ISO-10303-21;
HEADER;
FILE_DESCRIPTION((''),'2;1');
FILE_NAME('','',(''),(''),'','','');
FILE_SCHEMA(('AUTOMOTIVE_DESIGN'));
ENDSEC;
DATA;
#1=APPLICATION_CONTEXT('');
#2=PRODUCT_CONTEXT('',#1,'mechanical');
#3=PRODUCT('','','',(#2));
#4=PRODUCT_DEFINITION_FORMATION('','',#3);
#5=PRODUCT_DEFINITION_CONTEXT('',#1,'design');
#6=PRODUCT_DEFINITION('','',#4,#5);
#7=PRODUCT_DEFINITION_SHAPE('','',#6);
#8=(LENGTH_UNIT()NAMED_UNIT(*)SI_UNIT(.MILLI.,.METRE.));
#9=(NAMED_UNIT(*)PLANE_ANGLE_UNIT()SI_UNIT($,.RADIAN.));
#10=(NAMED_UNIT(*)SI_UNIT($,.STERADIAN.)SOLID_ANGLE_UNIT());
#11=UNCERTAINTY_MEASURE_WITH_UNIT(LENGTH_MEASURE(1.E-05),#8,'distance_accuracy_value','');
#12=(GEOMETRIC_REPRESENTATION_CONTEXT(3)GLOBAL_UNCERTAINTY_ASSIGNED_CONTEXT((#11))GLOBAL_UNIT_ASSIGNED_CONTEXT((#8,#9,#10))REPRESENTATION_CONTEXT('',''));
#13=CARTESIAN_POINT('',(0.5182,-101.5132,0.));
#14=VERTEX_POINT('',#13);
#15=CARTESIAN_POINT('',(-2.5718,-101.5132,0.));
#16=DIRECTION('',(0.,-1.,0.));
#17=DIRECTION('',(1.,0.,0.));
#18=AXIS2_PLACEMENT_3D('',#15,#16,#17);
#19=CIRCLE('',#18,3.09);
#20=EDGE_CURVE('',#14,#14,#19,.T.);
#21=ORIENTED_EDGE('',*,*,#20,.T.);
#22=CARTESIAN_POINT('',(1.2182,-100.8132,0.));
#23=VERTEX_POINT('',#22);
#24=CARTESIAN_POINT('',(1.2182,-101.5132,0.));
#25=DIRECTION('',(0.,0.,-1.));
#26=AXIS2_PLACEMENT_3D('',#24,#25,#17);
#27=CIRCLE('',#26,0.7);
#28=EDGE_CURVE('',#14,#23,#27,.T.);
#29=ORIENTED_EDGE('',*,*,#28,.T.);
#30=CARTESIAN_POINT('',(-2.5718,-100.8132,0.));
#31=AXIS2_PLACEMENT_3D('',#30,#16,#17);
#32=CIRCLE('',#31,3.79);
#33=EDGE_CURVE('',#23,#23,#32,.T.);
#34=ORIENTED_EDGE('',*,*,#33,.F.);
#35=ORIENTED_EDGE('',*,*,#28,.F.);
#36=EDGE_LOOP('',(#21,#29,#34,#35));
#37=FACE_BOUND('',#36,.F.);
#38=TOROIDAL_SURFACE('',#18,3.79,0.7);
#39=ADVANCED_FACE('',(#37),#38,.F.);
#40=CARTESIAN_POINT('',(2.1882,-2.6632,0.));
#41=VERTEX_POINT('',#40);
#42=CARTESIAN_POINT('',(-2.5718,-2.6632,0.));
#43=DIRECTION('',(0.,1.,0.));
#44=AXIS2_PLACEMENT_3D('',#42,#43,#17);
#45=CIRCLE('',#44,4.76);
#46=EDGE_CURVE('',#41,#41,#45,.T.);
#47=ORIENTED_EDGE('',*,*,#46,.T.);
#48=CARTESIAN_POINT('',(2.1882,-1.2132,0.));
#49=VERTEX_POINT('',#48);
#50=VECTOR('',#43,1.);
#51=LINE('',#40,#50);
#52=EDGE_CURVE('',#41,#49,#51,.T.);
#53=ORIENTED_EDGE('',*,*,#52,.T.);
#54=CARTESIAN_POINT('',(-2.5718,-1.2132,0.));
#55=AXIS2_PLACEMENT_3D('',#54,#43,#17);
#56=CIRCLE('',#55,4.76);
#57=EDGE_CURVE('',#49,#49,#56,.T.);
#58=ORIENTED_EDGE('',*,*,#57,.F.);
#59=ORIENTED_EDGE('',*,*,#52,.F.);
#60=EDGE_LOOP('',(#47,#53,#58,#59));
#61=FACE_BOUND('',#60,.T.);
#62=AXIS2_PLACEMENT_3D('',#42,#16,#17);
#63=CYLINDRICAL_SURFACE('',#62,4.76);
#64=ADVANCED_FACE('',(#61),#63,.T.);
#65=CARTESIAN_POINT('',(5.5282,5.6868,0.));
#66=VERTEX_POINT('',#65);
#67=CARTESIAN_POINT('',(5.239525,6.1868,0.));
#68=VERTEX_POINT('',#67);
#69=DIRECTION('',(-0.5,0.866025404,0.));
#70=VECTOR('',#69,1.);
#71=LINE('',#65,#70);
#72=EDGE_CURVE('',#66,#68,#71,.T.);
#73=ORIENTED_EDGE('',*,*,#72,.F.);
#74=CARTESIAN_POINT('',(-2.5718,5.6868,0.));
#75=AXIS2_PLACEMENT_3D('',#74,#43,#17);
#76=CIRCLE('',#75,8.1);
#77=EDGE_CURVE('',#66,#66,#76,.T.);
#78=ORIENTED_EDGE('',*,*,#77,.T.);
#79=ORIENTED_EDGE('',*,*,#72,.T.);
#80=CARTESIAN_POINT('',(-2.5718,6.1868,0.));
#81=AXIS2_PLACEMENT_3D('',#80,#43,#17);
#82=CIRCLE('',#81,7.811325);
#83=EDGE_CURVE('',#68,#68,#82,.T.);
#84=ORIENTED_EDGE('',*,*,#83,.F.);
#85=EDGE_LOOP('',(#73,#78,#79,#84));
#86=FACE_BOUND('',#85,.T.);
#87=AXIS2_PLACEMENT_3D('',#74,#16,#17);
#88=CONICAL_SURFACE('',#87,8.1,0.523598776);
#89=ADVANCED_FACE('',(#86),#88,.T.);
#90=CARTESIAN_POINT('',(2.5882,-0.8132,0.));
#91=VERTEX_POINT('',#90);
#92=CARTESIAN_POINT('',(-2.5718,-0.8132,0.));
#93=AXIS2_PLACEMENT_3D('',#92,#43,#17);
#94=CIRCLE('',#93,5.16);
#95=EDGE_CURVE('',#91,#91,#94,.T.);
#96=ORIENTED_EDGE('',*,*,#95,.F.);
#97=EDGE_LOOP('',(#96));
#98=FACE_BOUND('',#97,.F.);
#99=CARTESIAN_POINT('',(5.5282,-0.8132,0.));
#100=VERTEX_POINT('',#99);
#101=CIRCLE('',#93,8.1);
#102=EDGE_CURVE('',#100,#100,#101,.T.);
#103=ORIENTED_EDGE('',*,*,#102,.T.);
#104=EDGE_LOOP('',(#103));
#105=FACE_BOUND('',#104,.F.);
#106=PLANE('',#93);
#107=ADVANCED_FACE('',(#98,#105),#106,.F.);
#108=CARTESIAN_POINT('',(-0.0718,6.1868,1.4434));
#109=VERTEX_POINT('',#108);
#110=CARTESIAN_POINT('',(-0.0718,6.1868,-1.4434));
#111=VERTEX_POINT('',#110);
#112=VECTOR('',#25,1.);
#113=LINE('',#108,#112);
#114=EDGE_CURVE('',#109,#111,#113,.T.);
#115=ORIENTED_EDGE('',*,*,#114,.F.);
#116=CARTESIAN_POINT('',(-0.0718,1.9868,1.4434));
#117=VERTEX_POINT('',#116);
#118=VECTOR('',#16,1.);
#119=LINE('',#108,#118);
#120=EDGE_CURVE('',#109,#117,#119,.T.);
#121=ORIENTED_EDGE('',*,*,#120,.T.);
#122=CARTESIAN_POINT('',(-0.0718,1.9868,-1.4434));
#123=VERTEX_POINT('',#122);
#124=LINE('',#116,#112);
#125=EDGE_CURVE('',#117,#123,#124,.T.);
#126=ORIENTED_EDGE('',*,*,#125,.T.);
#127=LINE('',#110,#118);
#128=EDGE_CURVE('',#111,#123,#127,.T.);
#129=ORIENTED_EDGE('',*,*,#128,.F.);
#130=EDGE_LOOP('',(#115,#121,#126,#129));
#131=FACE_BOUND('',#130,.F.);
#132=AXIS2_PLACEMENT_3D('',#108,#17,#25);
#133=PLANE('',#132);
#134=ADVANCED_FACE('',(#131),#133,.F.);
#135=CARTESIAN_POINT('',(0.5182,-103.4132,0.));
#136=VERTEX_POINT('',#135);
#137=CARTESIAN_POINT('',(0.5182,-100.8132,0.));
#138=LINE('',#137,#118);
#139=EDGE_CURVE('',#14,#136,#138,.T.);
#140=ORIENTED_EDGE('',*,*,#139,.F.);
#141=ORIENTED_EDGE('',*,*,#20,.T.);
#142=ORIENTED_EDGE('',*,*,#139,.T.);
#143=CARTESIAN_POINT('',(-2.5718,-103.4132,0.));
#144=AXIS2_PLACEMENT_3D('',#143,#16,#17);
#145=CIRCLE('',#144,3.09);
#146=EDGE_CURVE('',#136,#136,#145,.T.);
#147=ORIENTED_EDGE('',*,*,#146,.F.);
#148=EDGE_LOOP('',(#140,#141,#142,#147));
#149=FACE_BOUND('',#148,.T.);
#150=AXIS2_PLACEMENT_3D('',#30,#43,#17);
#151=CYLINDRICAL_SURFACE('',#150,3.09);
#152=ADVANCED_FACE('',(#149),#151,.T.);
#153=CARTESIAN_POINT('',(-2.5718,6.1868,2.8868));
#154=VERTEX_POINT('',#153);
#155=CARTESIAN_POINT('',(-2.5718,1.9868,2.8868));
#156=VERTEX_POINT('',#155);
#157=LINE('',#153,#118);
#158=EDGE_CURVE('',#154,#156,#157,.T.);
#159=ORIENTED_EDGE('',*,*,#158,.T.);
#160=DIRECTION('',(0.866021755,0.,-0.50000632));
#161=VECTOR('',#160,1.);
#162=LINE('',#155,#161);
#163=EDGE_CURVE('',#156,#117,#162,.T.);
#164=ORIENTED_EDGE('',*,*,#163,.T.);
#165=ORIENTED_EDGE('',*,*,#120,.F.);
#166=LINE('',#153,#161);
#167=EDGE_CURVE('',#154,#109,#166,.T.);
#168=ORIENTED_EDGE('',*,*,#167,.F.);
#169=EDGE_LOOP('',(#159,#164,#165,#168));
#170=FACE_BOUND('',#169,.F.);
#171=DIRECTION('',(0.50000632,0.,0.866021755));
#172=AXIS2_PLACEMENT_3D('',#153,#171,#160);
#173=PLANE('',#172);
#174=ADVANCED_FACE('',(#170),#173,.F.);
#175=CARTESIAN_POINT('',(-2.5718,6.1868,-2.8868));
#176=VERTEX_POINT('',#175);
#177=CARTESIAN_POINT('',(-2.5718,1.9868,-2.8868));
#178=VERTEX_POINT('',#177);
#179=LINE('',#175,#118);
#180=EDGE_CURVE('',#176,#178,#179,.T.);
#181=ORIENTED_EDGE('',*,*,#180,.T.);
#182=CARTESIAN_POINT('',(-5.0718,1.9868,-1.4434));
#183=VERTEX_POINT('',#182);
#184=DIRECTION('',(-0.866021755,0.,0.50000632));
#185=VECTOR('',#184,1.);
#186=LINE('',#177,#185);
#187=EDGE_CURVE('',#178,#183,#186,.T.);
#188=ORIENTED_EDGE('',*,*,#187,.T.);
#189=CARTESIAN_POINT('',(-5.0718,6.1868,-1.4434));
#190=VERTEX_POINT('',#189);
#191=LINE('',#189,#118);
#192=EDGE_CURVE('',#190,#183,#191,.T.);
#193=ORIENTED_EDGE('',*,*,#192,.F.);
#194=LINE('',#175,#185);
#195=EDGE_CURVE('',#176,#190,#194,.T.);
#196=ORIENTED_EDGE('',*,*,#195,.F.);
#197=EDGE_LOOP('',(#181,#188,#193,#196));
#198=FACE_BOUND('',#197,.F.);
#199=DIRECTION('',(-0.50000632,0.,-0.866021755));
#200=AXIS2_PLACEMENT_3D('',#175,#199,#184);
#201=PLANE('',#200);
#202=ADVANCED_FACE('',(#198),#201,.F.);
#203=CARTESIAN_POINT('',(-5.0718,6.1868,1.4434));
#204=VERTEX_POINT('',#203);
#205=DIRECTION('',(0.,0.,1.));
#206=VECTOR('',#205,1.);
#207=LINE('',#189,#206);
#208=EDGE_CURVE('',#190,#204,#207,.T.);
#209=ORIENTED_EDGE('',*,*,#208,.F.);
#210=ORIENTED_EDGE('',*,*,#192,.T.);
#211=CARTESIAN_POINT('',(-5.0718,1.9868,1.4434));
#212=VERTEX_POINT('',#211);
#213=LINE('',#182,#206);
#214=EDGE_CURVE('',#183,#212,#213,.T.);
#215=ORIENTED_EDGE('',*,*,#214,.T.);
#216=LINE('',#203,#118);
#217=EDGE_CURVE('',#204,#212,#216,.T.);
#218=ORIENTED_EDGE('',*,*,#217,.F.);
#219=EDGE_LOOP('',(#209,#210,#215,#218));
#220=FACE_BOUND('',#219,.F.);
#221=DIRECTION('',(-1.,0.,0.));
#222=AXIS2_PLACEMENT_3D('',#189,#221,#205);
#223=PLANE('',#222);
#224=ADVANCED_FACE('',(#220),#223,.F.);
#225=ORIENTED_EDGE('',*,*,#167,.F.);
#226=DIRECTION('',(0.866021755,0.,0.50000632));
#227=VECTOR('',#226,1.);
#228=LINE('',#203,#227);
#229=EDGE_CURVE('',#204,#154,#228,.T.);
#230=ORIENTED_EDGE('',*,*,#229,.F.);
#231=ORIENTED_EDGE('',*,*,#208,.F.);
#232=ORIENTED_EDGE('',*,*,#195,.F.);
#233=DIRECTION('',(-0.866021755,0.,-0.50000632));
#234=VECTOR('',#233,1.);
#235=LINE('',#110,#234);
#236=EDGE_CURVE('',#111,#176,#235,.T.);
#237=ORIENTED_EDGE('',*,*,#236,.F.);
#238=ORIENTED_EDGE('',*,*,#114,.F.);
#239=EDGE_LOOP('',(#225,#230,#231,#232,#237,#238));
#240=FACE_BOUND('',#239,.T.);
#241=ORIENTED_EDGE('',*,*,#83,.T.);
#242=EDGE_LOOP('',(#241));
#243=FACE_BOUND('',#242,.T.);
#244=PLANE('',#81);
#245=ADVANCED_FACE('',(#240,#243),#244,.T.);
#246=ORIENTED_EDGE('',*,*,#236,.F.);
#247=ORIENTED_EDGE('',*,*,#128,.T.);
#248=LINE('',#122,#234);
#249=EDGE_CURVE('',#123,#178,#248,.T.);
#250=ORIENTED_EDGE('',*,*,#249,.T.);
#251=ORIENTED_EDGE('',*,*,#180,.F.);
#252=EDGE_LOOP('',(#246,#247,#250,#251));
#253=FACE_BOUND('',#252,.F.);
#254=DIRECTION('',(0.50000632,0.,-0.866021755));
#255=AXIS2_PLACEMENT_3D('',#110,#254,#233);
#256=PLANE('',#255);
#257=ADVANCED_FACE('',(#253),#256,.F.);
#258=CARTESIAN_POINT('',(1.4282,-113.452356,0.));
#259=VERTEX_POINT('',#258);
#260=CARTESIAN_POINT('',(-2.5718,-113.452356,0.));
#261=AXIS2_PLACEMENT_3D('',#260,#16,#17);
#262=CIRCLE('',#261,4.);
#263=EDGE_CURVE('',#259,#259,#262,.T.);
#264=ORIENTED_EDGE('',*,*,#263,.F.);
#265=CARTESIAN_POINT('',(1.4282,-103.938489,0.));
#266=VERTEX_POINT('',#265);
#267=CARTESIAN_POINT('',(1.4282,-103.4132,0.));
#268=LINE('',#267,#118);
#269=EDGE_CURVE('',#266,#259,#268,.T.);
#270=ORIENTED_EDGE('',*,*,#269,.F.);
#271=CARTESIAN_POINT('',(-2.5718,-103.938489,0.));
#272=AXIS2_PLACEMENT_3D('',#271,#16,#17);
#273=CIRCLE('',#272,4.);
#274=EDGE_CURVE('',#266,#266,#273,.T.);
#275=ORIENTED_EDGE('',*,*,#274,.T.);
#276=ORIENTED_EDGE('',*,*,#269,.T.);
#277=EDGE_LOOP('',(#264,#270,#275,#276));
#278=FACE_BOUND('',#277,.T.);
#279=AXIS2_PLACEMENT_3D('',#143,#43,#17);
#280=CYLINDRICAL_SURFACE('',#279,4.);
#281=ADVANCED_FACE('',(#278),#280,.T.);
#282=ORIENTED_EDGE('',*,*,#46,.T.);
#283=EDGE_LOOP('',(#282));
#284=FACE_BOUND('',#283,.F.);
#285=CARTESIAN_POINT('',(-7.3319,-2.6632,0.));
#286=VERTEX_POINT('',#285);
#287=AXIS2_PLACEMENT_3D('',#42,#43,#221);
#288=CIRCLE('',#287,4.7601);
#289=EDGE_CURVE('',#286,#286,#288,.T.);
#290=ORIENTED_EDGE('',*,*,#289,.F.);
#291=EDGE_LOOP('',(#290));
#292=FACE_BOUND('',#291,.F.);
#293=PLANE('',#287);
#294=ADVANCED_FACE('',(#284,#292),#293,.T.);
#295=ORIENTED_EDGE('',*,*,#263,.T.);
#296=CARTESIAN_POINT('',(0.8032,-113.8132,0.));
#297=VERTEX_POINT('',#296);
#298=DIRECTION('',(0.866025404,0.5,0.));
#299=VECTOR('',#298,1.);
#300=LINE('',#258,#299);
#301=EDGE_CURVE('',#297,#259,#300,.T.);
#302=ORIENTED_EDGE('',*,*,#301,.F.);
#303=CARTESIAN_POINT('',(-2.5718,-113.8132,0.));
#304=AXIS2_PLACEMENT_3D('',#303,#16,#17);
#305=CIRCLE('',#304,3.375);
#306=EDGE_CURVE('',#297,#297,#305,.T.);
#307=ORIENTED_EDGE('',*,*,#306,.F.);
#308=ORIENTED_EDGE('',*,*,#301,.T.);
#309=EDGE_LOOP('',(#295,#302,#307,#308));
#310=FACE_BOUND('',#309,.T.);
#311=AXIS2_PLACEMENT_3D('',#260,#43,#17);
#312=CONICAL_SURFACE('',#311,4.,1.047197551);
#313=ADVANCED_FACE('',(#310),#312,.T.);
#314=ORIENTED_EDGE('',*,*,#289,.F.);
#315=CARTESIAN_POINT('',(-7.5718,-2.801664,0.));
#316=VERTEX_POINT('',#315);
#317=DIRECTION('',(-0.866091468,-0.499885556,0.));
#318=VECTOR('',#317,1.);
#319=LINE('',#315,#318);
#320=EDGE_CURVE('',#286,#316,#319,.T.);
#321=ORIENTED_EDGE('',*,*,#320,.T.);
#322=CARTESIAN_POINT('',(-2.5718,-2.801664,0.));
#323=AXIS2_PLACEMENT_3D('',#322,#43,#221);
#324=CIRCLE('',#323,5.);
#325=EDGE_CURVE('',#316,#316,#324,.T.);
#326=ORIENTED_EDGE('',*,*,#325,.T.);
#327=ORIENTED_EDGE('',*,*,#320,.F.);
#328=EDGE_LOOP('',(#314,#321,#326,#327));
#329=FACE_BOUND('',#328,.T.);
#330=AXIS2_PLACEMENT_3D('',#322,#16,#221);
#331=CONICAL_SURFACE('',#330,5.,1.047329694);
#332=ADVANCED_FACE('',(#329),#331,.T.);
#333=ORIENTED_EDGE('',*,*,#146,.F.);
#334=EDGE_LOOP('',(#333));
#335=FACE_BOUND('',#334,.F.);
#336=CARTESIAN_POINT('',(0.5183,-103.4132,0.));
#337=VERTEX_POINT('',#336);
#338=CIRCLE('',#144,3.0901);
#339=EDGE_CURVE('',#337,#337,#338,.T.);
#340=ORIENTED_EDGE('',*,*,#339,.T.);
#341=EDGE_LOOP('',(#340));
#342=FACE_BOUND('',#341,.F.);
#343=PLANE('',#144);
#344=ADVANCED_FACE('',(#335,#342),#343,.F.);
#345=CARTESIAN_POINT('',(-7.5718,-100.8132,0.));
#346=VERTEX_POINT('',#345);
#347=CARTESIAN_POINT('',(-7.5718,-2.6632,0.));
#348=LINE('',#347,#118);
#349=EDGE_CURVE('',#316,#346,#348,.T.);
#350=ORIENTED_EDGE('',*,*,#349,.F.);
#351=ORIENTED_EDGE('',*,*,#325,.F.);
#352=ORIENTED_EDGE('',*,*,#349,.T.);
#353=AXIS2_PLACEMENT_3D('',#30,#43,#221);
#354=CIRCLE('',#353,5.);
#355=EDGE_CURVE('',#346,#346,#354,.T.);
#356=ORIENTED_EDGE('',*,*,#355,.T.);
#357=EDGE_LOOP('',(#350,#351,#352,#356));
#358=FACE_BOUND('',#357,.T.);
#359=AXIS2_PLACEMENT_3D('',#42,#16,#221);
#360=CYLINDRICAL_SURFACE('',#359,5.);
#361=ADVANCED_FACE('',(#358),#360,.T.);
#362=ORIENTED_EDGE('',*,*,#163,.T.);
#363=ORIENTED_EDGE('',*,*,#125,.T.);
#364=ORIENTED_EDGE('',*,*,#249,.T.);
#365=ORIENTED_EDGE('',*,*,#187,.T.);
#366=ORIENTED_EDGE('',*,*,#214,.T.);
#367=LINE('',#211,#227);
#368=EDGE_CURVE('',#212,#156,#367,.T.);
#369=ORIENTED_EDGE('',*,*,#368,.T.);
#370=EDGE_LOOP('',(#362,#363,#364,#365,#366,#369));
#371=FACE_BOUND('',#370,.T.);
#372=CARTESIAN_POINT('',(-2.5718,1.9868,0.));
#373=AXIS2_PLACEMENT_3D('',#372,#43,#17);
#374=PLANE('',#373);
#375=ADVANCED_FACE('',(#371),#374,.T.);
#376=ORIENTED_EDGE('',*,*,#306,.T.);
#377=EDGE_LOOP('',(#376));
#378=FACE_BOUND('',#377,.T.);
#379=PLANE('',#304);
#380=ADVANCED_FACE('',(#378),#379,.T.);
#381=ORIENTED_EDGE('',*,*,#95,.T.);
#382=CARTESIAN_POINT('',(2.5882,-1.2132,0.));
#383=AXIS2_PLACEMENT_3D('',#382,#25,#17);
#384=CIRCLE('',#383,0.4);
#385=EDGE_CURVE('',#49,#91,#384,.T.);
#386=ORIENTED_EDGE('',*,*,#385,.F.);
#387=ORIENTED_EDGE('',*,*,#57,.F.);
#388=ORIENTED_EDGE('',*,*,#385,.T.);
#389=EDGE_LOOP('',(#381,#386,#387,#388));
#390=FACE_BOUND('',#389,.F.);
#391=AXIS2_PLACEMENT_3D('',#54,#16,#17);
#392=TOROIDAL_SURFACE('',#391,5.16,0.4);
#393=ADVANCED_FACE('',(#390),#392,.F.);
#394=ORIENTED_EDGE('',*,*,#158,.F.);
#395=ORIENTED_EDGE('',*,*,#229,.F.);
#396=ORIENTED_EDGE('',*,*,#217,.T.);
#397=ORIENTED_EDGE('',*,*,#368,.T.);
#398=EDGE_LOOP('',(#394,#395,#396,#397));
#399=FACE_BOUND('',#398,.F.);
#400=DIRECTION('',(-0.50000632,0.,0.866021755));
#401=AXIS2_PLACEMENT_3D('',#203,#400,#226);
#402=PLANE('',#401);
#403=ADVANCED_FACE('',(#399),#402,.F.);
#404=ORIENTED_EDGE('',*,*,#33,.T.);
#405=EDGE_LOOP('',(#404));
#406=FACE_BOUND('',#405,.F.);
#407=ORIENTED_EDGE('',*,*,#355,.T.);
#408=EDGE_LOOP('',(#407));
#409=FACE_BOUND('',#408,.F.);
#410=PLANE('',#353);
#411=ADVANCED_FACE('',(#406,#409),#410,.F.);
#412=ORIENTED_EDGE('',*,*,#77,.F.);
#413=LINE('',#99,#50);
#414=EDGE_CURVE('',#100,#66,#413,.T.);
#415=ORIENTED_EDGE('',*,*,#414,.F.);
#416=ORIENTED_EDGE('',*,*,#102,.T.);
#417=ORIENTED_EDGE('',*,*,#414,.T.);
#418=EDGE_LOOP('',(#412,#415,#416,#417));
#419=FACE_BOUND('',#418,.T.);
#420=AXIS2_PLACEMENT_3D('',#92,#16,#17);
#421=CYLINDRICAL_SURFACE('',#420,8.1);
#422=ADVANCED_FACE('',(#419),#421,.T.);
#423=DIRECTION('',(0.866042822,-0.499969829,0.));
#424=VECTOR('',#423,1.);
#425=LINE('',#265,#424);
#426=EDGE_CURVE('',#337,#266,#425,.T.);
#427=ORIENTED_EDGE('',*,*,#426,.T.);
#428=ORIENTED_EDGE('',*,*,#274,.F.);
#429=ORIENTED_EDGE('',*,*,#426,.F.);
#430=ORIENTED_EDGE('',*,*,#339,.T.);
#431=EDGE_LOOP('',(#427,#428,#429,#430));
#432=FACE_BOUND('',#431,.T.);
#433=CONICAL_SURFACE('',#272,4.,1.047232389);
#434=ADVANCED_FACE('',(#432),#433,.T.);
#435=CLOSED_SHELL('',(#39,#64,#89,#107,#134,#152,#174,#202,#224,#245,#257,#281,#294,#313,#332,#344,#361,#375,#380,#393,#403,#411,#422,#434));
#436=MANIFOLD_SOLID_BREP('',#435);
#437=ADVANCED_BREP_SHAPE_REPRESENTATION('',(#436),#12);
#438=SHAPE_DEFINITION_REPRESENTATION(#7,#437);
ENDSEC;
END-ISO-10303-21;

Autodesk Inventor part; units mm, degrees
ref_plane "YZ Plane" through (0, 0, 0) normal (1, 0, 0) x (0, 1, 0)
ref_plane "XZ Plane" through (0, 0, 0) normal (0, 1, 0) x (-1, 0, 0)
ref_plane "XY Plane" through (0, 0, 0) normal (0, 0, 1) x (1, 0, 0)
sketch "Sketch1" plane through (0, 0, 0) normal (0, 0, 1) x (1, 0, 0)
  line L0 (-2.5718, -2.6632) -> (-7.5718, -2.6632)
  line L1 (-7.5718, -2.6632) -> (-7.5718, -100.8132)
  line L2 (-7.5718, -100.8132) -> (-2.5718, -100.8132)
  line L3 (-2.5718, -100.8132) -> (-2.5718, -2.6632)
  dimension "d1" = 98.15
  dimension "d2" = 5
revolve "Shoulder" add sketch "Sketch1" angle 360 about axis through (-2.5718, -100.8132, 0) along (0, 1, 0)
sketch "Sketch2" plane through (-2.5718, -2.6632, 0) normal (0, 1, 0) x (1, 0, 0)
  circle A0 centre (0, 0) radius 5 projected
  circle A1 centre (0, 0) radius 4.76
  dimension "d3" = 9.52
extrude "Shoulder_neck" add sketch "Sketch2" along normal blind 1.85 contours A1
sketch "Sketch3" plane through (-2.5718, -0.8132, 0) normal (0, 1, 0) x (1, 0, 0)
  circle A0 centre (0, 0) radius 4.76 projected
  circle A1 centre (0, 0) radius 8.1
  dimension "d6" = 16.2
extrude "Head" add sketch "Sketch3" along normal blind 7 contours A0 | A1
sketch "Sketch4" plane through (-2.5718, -100.8132, 0) normal (0, -1, 0) x (1, 0, 0)
  circle A0 centre (0, 0) radius 5 projected
  circle A1 centre (0, 0) radius 3.09
  dimension "d9" = 6.18
extrude "Thread_neck" add sketch "Sketch4" along normal blind 2.6 contours A1
sketch "Sketch5" plane through (-2.5718, -103.4132, 0) normal (0, -1, 0) x (1, 0, 0)
  circle A0 centre (0, 0) radius 3.09 projected
  circle A1 centre (0, 0) radius 4
  dimension "d12" = 8
extrude "Thread_shoulder" add sketch "Sketch5" along normal blind 10.4 contours A0 | A1
sketch "Sketch6" plane through (-2.5718, 6.1868, 0) normal (0, 1, 0) x (1, 0, 0)
  circle A0 centre (0, 0) radius 8.1 projected
  circle A1 centre (0, 0) radius 2.5 construction
  line L0 (-2.5, 1.4434) -> (-2.5, -1.4434)
  line L1 (-2.5, -1.4434) -> (0, -2.8868)
  line L2 (0, -2.8868) -> (2.5, -1.4434)
  line L3 (2.5, -1.4434) -> (2.5, 1.4434)
  line L4 (2.5, 1.4434) -> (0, 2.8868)
  line L5 (0, 2.8868) -> (-2.5, 1.4434)
  dimension "d15" = 5
extrude "Hex" cut sketch "Sketch6" against normal blind 4.2 contours L5 L4 L3 L2 L1 L0
chamfer "Chamfer1" distance 0.24 angle 30 1 edges at (2.4282, -2.6632, 0) measured on face at (-7.3973, -2.6632, -0.7786)
fillet "Fillet1" radius 0.4 1 edges at (-7.3318, -0.8132, 0)
chamfer "Chamfer2" distance 0.5 angle 30 1 edges at (-10.6718, 6.1868, 0) measured on face at (5.4233, 3.8535, 1.2993)
chamfer "Chamfer3" distance 0.625 angle 30 1 edges at (-6.5718, -113.8132, 0) measured on face at (-1.8144, -113.8132, 1.0973)
fillet "Fillet2" radius 0.7 1 edges at (-5.6618, -100.8132, 0)
chamfer "Chamfer7" distance 0.91 angle 30 1 edges at (-6.5718, -103.4132, 0) measured on face at (1.0861, -103.4132, -0.3191)
thread "Thread" size "M8x1.25" class "6g" standard "ANSI Metric M Profile" full length
equation "\"d1\" = Shoulder_length - Shoulder_neck_length"
equation "\"d2\" = 0.5 * Shoulder_diameter"
equation "\"d3\" = Shoulder_neck_dia"
equation "\"d4\" = Shoulder_neck_length"
equation "\"d6\" = Head_diameter"
equation "\"d7\" = Head_height"
equation "\"d9\" = Thread_neck_dia"
equation "\"d10\" = Thread_neck_length"
equation "\"d12\" = Thread_diameter"
equation "\"d13\" = Thread_length - Thread_neck_length"
equation "\"d15\" = Hex_size"
equation "\"d16\" = Hex_length"
equation "\"d18\" = -0.5 * Shoulder_neck_dia + 0.5 * Shoulder_diameter"
equation "\"d64\" = -0.5 * Shoulder_neck_dia + 0.5 * Shoulder_diameter"
equation "\"d21\" = 0.1 * Hex_size"
equation "\"d65\" = 0.1 * Hex_size"
equation "\"d23\" = 0.5 * Thread_pitch"
equation "\"d66\" = 0.5 * Thread_pitch"
equation "\"d25\" = Thread_neck_radius"
equation "\"d60\" = -0.5 * Thread_neck_dia + 0.5 * Thread_diameter"
equation "\"d67\" = -0.5 * Thread_neck_dia + 0.5 * Thread_diameter"
equation "\"Shoulder_length\" = 100"
equation "\"Shoulder_neck_dia\" = 9.52"
equation "\"Thread_diameter\" = 8"
equation "\"Thread_length\" = 13"
equation "\"Head_diameter\" = 16.2"
equation "\"Head_height\" = 7"
equation "\"Thread_neck_dia\" = 6.18"
equation "\"Hex_size\" = 5"
equation "\"Hex_length\" = 4.2"
equation "\"Thread_pitch\" = 1.25"
equation "\"Shoulder_neck_length\" = 1.85"
equation "\"Thread_neck_length\" = 2.6"
equation "\"Thread_neck_radius\" = 0.7"
equation "\"Shoulder_diameter\" = 10"
properties part number "SCREW, SHOULDER, P, 12.9,  M10X100MM" material "Steel, High Strength Low Alloy"
